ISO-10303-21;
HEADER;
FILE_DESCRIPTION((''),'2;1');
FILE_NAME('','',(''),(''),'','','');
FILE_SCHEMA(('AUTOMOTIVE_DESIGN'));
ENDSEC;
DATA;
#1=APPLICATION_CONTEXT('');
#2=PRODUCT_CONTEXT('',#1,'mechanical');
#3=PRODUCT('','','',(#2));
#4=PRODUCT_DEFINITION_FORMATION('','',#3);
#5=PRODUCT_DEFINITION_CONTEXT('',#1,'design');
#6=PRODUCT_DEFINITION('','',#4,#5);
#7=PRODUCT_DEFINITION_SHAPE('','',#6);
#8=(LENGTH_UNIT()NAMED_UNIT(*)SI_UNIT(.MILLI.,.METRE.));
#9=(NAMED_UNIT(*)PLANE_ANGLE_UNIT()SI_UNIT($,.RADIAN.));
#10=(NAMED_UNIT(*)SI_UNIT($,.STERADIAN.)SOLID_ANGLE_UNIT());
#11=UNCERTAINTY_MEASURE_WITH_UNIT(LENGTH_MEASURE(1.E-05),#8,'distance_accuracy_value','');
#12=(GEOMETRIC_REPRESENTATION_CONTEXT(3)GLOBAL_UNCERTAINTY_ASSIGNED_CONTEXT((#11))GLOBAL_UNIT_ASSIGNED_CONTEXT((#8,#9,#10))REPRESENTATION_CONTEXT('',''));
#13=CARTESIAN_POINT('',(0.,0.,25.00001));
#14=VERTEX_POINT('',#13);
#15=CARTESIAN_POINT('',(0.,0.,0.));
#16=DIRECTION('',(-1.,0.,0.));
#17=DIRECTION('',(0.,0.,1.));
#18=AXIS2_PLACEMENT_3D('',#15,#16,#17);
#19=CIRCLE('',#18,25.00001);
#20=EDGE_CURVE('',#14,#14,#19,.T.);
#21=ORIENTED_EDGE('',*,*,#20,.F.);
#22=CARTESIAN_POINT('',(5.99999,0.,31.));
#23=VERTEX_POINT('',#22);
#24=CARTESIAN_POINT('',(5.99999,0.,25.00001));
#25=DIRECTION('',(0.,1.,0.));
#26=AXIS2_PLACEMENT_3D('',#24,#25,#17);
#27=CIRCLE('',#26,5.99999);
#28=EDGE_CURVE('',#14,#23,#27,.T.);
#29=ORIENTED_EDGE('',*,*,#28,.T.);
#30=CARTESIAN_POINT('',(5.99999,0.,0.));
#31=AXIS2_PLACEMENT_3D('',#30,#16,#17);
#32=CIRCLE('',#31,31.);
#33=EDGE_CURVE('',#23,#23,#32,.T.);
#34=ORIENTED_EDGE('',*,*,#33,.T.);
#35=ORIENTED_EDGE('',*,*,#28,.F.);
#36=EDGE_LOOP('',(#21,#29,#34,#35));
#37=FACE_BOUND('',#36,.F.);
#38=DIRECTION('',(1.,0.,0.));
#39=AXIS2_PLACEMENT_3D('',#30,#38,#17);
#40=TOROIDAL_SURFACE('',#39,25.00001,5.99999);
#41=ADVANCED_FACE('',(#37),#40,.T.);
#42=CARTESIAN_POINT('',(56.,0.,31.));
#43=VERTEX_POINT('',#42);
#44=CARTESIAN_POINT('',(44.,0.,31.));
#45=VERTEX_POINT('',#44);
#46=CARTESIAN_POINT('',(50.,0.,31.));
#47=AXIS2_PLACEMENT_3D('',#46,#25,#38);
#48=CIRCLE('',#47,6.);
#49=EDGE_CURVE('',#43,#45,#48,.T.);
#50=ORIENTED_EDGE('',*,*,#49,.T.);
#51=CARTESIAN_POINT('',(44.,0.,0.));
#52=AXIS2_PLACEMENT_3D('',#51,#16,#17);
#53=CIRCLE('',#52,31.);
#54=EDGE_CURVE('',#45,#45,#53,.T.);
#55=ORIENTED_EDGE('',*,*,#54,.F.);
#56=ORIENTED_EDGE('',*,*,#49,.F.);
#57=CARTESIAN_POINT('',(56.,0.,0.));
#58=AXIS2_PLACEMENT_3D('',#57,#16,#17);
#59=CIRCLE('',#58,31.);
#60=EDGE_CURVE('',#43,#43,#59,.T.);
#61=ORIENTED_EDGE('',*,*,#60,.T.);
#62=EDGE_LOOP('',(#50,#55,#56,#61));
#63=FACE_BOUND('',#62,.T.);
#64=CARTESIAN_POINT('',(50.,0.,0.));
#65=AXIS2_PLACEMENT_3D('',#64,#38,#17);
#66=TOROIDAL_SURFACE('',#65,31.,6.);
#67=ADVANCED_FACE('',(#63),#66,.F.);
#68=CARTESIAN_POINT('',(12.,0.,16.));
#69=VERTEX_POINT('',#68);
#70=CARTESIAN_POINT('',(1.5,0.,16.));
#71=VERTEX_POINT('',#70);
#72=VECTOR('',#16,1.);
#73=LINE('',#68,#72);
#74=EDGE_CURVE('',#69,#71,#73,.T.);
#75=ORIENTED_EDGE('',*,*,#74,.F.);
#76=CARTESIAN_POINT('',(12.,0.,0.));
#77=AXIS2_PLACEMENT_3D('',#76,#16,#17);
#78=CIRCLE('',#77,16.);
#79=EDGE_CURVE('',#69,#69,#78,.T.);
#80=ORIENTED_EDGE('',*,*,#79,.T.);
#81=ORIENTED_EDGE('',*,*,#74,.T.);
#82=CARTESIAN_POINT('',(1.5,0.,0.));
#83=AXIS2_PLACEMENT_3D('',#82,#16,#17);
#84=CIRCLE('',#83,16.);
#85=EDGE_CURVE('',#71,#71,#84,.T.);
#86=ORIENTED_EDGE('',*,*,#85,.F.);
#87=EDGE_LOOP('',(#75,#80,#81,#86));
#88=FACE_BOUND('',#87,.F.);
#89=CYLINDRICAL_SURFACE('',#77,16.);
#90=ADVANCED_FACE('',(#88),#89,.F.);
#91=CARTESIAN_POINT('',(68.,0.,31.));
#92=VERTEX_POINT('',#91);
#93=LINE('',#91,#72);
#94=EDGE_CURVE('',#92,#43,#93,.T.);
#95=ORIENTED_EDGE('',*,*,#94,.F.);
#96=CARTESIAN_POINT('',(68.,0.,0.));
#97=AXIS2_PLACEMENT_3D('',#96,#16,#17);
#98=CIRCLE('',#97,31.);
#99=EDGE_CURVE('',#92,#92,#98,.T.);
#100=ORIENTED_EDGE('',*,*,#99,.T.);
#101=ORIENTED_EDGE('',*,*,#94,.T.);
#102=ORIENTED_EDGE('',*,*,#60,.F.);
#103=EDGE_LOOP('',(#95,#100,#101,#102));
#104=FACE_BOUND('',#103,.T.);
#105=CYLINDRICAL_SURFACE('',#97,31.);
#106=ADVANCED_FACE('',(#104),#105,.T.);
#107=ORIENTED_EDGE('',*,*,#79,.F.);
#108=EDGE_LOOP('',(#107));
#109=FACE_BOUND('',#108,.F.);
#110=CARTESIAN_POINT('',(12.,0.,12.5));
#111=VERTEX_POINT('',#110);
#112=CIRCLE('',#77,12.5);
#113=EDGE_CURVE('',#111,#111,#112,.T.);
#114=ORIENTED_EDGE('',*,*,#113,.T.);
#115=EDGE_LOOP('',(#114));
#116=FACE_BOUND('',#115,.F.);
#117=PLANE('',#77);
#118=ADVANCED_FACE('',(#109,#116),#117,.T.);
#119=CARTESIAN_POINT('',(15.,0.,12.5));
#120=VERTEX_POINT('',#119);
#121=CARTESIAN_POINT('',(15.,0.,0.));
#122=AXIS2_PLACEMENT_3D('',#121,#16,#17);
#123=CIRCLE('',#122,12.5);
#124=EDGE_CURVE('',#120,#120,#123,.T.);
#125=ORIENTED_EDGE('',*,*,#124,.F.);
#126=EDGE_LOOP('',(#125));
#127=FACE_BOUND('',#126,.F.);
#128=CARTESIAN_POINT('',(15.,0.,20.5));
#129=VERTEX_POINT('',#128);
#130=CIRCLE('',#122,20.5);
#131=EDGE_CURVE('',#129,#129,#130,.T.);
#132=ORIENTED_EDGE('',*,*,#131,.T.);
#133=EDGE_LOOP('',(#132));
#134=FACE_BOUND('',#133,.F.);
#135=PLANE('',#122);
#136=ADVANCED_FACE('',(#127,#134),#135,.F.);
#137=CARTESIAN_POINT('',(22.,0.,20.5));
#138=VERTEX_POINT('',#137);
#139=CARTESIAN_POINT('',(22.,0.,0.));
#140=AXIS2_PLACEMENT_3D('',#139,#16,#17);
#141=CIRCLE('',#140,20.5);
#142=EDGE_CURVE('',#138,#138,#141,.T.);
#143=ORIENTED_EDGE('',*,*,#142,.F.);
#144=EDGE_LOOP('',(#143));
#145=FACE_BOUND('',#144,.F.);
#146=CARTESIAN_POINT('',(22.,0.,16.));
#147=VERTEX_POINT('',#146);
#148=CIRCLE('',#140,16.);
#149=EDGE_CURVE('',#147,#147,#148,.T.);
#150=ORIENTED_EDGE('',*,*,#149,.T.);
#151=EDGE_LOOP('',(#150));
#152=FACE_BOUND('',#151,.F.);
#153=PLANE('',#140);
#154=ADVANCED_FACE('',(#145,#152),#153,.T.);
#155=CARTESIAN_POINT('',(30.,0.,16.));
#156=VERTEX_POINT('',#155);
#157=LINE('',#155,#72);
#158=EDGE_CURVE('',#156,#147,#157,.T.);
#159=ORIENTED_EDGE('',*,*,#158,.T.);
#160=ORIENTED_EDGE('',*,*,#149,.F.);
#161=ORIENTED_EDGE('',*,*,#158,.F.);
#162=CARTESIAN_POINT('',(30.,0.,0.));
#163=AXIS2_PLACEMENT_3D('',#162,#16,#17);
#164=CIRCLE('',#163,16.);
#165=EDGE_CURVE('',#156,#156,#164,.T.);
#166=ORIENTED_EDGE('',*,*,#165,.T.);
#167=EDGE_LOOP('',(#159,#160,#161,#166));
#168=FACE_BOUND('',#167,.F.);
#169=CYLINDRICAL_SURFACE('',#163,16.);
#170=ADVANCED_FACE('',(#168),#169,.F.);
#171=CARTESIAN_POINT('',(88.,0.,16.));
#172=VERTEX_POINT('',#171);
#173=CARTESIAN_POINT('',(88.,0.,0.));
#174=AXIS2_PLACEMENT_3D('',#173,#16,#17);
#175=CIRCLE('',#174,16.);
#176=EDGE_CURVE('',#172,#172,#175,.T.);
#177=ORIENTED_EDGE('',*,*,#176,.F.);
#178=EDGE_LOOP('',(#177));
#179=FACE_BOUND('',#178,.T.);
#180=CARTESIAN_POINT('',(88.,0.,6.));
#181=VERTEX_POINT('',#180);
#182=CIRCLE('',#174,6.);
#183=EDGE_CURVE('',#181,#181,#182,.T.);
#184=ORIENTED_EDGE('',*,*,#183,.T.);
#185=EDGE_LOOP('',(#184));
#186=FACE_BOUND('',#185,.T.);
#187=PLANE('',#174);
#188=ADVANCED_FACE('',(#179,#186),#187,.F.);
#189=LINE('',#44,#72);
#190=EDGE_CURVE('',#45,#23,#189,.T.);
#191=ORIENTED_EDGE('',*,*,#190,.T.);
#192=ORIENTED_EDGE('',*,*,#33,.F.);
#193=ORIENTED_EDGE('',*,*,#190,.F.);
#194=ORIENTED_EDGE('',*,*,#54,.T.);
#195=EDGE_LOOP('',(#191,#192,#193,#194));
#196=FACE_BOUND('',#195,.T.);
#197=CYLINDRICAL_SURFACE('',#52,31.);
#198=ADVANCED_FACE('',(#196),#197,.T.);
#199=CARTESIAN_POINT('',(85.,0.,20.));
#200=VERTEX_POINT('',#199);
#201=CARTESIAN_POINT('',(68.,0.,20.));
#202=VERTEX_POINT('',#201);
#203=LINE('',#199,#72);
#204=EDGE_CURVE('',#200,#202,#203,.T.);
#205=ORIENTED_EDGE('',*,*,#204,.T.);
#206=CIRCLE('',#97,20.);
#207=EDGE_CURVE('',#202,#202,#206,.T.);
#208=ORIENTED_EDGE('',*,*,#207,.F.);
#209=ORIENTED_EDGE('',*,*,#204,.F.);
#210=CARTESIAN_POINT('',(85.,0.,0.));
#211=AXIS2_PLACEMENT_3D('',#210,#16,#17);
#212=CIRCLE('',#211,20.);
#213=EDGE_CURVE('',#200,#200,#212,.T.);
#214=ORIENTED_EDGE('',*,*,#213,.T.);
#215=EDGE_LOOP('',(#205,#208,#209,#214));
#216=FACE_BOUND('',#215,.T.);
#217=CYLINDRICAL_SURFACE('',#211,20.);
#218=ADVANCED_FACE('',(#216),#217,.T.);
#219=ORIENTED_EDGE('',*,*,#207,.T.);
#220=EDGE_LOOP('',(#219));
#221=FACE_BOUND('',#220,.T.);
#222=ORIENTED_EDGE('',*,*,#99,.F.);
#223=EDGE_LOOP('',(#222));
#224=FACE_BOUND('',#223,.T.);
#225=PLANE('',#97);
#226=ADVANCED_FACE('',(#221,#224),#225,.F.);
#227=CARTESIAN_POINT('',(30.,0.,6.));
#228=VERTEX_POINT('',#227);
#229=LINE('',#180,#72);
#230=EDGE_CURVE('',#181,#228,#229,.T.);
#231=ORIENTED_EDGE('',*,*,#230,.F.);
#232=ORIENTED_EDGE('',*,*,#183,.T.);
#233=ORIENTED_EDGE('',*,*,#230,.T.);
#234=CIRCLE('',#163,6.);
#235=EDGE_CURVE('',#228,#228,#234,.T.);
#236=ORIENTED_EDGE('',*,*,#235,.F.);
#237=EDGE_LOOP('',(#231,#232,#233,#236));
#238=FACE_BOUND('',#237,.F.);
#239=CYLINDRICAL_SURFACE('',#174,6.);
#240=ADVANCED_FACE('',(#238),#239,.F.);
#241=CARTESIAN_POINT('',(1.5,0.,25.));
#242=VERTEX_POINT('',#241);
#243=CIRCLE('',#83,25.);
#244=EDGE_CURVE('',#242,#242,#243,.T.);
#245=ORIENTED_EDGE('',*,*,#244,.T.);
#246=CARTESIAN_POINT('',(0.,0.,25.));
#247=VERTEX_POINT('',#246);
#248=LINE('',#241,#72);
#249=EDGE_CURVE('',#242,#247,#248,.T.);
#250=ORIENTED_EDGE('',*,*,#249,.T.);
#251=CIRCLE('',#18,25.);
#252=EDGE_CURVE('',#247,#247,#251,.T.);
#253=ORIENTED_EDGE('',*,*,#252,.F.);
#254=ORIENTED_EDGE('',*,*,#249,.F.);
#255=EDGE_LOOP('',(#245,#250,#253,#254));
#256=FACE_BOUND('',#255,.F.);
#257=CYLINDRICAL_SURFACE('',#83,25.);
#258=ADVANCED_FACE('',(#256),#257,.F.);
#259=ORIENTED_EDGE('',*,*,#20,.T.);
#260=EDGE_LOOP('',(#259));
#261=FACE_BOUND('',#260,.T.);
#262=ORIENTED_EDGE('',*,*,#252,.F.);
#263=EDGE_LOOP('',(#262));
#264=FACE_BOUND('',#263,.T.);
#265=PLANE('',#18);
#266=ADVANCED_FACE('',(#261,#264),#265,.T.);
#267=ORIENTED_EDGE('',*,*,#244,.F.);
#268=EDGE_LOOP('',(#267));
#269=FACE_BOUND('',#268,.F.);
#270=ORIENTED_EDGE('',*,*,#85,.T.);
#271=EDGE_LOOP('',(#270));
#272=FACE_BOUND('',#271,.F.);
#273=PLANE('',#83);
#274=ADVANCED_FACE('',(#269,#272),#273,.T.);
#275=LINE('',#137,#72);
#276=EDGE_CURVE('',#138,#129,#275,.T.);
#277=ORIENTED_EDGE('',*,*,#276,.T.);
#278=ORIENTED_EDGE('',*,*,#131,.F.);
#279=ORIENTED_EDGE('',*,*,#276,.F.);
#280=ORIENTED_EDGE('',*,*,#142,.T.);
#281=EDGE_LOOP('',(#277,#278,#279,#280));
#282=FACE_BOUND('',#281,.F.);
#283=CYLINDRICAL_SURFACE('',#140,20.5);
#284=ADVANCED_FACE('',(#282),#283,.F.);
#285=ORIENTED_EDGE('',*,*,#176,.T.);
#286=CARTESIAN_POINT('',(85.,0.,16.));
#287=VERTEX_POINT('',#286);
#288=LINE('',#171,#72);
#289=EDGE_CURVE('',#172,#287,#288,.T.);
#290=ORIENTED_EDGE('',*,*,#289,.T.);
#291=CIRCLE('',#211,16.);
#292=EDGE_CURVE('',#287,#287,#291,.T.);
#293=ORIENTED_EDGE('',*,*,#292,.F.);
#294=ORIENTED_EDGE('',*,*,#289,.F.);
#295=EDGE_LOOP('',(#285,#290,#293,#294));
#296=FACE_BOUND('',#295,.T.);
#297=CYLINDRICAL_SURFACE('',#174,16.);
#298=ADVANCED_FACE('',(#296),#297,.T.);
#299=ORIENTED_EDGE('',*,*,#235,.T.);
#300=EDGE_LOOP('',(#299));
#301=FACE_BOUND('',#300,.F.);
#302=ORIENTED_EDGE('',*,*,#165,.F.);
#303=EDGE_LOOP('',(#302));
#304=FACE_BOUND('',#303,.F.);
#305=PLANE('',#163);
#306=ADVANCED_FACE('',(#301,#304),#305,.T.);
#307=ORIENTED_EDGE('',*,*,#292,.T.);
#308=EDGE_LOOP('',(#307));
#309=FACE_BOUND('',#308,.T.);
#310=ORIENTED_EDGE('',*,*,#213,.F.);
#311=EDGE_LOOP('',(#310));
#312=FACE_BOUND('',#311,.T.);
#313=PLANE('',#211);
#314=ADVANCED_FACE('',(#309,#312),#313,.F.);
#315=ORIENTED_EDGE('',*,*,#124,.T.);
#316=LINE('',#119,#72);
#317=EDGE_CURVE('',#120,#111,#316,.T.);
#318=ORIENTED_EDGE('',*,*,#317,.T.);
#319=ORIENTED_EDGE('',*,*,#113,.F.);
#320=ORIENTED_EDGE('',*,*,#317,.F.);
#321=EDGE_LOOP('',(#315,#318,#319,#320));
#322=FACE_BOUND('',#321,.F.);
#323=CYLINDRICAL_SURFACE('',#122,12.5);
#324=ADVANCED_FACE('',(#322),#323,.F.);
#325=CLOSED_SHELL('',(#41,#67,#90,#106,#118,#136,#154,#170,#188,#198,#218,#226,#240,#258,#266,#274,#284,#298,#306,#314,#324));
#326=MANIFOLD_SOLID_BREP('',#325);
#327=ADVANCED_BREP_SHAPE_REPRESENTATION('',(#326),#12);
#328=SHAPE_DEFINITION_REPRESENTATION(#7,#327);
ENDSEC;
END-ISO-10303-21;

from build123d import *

# Parameters (mm, degrees)
F4_R = 5.99999


# Not quite as in the source:
# - a fillet or chamfer is up to 0.001 mm smaller than in the source, because OpenCascade refuses the exact size


with BuildPart() as f1:
    # F0 (on Front) → F1 (revolve)
    with BuildSketch(Plane.XZ):
        with BuildLine():
            Line((0, 31), (0, 0))
            Line((0, 0), (88, 0))
            Line((88, 0), (88, 16))
            Line((88, 16), (85, 16))
            Line((85, 16), (85, 20))
            Line((85, 20), (68, 20))
            Line((68, 20), (68, 31))
            Line((68, 31), (56, 31))
            ThreePointArc((56, 31), (50, 25), (44, 31))
            Line((44, 31), (0, 31))
        make_face()
    revolve(axis=Axis((44, 0, 0), (-1, 0, 0)))

    # F2 (on Front) → F3 (revolve, cut)
    with BuildSketch(Plane.XZ):
        Polygon((0, 25), (0, 0), (88, 0), (88, 6), (30, 6), (30, 16), (22, 16), (22, 20.5), (15, 20.5), (15, 12.5), (12, 12.5), (12, 16), (1.5, 16), (1.5, 25), align=None)
    revolve(axis=Axis((-15.3110799765, 0, 0), (-1, 0, 0)), mode=Mode.SUBTRACT)

    # F4 (radius 6 in the source; OpenCascade refuses exactly that, so slightly less here)
    f4_edges = [f1.edges().sort_by_distance(p)[0] for p in [
        (0, 0, -31),
    ]]
    fillet(f4_edges, radius=F4_R)


solid = f1.part
